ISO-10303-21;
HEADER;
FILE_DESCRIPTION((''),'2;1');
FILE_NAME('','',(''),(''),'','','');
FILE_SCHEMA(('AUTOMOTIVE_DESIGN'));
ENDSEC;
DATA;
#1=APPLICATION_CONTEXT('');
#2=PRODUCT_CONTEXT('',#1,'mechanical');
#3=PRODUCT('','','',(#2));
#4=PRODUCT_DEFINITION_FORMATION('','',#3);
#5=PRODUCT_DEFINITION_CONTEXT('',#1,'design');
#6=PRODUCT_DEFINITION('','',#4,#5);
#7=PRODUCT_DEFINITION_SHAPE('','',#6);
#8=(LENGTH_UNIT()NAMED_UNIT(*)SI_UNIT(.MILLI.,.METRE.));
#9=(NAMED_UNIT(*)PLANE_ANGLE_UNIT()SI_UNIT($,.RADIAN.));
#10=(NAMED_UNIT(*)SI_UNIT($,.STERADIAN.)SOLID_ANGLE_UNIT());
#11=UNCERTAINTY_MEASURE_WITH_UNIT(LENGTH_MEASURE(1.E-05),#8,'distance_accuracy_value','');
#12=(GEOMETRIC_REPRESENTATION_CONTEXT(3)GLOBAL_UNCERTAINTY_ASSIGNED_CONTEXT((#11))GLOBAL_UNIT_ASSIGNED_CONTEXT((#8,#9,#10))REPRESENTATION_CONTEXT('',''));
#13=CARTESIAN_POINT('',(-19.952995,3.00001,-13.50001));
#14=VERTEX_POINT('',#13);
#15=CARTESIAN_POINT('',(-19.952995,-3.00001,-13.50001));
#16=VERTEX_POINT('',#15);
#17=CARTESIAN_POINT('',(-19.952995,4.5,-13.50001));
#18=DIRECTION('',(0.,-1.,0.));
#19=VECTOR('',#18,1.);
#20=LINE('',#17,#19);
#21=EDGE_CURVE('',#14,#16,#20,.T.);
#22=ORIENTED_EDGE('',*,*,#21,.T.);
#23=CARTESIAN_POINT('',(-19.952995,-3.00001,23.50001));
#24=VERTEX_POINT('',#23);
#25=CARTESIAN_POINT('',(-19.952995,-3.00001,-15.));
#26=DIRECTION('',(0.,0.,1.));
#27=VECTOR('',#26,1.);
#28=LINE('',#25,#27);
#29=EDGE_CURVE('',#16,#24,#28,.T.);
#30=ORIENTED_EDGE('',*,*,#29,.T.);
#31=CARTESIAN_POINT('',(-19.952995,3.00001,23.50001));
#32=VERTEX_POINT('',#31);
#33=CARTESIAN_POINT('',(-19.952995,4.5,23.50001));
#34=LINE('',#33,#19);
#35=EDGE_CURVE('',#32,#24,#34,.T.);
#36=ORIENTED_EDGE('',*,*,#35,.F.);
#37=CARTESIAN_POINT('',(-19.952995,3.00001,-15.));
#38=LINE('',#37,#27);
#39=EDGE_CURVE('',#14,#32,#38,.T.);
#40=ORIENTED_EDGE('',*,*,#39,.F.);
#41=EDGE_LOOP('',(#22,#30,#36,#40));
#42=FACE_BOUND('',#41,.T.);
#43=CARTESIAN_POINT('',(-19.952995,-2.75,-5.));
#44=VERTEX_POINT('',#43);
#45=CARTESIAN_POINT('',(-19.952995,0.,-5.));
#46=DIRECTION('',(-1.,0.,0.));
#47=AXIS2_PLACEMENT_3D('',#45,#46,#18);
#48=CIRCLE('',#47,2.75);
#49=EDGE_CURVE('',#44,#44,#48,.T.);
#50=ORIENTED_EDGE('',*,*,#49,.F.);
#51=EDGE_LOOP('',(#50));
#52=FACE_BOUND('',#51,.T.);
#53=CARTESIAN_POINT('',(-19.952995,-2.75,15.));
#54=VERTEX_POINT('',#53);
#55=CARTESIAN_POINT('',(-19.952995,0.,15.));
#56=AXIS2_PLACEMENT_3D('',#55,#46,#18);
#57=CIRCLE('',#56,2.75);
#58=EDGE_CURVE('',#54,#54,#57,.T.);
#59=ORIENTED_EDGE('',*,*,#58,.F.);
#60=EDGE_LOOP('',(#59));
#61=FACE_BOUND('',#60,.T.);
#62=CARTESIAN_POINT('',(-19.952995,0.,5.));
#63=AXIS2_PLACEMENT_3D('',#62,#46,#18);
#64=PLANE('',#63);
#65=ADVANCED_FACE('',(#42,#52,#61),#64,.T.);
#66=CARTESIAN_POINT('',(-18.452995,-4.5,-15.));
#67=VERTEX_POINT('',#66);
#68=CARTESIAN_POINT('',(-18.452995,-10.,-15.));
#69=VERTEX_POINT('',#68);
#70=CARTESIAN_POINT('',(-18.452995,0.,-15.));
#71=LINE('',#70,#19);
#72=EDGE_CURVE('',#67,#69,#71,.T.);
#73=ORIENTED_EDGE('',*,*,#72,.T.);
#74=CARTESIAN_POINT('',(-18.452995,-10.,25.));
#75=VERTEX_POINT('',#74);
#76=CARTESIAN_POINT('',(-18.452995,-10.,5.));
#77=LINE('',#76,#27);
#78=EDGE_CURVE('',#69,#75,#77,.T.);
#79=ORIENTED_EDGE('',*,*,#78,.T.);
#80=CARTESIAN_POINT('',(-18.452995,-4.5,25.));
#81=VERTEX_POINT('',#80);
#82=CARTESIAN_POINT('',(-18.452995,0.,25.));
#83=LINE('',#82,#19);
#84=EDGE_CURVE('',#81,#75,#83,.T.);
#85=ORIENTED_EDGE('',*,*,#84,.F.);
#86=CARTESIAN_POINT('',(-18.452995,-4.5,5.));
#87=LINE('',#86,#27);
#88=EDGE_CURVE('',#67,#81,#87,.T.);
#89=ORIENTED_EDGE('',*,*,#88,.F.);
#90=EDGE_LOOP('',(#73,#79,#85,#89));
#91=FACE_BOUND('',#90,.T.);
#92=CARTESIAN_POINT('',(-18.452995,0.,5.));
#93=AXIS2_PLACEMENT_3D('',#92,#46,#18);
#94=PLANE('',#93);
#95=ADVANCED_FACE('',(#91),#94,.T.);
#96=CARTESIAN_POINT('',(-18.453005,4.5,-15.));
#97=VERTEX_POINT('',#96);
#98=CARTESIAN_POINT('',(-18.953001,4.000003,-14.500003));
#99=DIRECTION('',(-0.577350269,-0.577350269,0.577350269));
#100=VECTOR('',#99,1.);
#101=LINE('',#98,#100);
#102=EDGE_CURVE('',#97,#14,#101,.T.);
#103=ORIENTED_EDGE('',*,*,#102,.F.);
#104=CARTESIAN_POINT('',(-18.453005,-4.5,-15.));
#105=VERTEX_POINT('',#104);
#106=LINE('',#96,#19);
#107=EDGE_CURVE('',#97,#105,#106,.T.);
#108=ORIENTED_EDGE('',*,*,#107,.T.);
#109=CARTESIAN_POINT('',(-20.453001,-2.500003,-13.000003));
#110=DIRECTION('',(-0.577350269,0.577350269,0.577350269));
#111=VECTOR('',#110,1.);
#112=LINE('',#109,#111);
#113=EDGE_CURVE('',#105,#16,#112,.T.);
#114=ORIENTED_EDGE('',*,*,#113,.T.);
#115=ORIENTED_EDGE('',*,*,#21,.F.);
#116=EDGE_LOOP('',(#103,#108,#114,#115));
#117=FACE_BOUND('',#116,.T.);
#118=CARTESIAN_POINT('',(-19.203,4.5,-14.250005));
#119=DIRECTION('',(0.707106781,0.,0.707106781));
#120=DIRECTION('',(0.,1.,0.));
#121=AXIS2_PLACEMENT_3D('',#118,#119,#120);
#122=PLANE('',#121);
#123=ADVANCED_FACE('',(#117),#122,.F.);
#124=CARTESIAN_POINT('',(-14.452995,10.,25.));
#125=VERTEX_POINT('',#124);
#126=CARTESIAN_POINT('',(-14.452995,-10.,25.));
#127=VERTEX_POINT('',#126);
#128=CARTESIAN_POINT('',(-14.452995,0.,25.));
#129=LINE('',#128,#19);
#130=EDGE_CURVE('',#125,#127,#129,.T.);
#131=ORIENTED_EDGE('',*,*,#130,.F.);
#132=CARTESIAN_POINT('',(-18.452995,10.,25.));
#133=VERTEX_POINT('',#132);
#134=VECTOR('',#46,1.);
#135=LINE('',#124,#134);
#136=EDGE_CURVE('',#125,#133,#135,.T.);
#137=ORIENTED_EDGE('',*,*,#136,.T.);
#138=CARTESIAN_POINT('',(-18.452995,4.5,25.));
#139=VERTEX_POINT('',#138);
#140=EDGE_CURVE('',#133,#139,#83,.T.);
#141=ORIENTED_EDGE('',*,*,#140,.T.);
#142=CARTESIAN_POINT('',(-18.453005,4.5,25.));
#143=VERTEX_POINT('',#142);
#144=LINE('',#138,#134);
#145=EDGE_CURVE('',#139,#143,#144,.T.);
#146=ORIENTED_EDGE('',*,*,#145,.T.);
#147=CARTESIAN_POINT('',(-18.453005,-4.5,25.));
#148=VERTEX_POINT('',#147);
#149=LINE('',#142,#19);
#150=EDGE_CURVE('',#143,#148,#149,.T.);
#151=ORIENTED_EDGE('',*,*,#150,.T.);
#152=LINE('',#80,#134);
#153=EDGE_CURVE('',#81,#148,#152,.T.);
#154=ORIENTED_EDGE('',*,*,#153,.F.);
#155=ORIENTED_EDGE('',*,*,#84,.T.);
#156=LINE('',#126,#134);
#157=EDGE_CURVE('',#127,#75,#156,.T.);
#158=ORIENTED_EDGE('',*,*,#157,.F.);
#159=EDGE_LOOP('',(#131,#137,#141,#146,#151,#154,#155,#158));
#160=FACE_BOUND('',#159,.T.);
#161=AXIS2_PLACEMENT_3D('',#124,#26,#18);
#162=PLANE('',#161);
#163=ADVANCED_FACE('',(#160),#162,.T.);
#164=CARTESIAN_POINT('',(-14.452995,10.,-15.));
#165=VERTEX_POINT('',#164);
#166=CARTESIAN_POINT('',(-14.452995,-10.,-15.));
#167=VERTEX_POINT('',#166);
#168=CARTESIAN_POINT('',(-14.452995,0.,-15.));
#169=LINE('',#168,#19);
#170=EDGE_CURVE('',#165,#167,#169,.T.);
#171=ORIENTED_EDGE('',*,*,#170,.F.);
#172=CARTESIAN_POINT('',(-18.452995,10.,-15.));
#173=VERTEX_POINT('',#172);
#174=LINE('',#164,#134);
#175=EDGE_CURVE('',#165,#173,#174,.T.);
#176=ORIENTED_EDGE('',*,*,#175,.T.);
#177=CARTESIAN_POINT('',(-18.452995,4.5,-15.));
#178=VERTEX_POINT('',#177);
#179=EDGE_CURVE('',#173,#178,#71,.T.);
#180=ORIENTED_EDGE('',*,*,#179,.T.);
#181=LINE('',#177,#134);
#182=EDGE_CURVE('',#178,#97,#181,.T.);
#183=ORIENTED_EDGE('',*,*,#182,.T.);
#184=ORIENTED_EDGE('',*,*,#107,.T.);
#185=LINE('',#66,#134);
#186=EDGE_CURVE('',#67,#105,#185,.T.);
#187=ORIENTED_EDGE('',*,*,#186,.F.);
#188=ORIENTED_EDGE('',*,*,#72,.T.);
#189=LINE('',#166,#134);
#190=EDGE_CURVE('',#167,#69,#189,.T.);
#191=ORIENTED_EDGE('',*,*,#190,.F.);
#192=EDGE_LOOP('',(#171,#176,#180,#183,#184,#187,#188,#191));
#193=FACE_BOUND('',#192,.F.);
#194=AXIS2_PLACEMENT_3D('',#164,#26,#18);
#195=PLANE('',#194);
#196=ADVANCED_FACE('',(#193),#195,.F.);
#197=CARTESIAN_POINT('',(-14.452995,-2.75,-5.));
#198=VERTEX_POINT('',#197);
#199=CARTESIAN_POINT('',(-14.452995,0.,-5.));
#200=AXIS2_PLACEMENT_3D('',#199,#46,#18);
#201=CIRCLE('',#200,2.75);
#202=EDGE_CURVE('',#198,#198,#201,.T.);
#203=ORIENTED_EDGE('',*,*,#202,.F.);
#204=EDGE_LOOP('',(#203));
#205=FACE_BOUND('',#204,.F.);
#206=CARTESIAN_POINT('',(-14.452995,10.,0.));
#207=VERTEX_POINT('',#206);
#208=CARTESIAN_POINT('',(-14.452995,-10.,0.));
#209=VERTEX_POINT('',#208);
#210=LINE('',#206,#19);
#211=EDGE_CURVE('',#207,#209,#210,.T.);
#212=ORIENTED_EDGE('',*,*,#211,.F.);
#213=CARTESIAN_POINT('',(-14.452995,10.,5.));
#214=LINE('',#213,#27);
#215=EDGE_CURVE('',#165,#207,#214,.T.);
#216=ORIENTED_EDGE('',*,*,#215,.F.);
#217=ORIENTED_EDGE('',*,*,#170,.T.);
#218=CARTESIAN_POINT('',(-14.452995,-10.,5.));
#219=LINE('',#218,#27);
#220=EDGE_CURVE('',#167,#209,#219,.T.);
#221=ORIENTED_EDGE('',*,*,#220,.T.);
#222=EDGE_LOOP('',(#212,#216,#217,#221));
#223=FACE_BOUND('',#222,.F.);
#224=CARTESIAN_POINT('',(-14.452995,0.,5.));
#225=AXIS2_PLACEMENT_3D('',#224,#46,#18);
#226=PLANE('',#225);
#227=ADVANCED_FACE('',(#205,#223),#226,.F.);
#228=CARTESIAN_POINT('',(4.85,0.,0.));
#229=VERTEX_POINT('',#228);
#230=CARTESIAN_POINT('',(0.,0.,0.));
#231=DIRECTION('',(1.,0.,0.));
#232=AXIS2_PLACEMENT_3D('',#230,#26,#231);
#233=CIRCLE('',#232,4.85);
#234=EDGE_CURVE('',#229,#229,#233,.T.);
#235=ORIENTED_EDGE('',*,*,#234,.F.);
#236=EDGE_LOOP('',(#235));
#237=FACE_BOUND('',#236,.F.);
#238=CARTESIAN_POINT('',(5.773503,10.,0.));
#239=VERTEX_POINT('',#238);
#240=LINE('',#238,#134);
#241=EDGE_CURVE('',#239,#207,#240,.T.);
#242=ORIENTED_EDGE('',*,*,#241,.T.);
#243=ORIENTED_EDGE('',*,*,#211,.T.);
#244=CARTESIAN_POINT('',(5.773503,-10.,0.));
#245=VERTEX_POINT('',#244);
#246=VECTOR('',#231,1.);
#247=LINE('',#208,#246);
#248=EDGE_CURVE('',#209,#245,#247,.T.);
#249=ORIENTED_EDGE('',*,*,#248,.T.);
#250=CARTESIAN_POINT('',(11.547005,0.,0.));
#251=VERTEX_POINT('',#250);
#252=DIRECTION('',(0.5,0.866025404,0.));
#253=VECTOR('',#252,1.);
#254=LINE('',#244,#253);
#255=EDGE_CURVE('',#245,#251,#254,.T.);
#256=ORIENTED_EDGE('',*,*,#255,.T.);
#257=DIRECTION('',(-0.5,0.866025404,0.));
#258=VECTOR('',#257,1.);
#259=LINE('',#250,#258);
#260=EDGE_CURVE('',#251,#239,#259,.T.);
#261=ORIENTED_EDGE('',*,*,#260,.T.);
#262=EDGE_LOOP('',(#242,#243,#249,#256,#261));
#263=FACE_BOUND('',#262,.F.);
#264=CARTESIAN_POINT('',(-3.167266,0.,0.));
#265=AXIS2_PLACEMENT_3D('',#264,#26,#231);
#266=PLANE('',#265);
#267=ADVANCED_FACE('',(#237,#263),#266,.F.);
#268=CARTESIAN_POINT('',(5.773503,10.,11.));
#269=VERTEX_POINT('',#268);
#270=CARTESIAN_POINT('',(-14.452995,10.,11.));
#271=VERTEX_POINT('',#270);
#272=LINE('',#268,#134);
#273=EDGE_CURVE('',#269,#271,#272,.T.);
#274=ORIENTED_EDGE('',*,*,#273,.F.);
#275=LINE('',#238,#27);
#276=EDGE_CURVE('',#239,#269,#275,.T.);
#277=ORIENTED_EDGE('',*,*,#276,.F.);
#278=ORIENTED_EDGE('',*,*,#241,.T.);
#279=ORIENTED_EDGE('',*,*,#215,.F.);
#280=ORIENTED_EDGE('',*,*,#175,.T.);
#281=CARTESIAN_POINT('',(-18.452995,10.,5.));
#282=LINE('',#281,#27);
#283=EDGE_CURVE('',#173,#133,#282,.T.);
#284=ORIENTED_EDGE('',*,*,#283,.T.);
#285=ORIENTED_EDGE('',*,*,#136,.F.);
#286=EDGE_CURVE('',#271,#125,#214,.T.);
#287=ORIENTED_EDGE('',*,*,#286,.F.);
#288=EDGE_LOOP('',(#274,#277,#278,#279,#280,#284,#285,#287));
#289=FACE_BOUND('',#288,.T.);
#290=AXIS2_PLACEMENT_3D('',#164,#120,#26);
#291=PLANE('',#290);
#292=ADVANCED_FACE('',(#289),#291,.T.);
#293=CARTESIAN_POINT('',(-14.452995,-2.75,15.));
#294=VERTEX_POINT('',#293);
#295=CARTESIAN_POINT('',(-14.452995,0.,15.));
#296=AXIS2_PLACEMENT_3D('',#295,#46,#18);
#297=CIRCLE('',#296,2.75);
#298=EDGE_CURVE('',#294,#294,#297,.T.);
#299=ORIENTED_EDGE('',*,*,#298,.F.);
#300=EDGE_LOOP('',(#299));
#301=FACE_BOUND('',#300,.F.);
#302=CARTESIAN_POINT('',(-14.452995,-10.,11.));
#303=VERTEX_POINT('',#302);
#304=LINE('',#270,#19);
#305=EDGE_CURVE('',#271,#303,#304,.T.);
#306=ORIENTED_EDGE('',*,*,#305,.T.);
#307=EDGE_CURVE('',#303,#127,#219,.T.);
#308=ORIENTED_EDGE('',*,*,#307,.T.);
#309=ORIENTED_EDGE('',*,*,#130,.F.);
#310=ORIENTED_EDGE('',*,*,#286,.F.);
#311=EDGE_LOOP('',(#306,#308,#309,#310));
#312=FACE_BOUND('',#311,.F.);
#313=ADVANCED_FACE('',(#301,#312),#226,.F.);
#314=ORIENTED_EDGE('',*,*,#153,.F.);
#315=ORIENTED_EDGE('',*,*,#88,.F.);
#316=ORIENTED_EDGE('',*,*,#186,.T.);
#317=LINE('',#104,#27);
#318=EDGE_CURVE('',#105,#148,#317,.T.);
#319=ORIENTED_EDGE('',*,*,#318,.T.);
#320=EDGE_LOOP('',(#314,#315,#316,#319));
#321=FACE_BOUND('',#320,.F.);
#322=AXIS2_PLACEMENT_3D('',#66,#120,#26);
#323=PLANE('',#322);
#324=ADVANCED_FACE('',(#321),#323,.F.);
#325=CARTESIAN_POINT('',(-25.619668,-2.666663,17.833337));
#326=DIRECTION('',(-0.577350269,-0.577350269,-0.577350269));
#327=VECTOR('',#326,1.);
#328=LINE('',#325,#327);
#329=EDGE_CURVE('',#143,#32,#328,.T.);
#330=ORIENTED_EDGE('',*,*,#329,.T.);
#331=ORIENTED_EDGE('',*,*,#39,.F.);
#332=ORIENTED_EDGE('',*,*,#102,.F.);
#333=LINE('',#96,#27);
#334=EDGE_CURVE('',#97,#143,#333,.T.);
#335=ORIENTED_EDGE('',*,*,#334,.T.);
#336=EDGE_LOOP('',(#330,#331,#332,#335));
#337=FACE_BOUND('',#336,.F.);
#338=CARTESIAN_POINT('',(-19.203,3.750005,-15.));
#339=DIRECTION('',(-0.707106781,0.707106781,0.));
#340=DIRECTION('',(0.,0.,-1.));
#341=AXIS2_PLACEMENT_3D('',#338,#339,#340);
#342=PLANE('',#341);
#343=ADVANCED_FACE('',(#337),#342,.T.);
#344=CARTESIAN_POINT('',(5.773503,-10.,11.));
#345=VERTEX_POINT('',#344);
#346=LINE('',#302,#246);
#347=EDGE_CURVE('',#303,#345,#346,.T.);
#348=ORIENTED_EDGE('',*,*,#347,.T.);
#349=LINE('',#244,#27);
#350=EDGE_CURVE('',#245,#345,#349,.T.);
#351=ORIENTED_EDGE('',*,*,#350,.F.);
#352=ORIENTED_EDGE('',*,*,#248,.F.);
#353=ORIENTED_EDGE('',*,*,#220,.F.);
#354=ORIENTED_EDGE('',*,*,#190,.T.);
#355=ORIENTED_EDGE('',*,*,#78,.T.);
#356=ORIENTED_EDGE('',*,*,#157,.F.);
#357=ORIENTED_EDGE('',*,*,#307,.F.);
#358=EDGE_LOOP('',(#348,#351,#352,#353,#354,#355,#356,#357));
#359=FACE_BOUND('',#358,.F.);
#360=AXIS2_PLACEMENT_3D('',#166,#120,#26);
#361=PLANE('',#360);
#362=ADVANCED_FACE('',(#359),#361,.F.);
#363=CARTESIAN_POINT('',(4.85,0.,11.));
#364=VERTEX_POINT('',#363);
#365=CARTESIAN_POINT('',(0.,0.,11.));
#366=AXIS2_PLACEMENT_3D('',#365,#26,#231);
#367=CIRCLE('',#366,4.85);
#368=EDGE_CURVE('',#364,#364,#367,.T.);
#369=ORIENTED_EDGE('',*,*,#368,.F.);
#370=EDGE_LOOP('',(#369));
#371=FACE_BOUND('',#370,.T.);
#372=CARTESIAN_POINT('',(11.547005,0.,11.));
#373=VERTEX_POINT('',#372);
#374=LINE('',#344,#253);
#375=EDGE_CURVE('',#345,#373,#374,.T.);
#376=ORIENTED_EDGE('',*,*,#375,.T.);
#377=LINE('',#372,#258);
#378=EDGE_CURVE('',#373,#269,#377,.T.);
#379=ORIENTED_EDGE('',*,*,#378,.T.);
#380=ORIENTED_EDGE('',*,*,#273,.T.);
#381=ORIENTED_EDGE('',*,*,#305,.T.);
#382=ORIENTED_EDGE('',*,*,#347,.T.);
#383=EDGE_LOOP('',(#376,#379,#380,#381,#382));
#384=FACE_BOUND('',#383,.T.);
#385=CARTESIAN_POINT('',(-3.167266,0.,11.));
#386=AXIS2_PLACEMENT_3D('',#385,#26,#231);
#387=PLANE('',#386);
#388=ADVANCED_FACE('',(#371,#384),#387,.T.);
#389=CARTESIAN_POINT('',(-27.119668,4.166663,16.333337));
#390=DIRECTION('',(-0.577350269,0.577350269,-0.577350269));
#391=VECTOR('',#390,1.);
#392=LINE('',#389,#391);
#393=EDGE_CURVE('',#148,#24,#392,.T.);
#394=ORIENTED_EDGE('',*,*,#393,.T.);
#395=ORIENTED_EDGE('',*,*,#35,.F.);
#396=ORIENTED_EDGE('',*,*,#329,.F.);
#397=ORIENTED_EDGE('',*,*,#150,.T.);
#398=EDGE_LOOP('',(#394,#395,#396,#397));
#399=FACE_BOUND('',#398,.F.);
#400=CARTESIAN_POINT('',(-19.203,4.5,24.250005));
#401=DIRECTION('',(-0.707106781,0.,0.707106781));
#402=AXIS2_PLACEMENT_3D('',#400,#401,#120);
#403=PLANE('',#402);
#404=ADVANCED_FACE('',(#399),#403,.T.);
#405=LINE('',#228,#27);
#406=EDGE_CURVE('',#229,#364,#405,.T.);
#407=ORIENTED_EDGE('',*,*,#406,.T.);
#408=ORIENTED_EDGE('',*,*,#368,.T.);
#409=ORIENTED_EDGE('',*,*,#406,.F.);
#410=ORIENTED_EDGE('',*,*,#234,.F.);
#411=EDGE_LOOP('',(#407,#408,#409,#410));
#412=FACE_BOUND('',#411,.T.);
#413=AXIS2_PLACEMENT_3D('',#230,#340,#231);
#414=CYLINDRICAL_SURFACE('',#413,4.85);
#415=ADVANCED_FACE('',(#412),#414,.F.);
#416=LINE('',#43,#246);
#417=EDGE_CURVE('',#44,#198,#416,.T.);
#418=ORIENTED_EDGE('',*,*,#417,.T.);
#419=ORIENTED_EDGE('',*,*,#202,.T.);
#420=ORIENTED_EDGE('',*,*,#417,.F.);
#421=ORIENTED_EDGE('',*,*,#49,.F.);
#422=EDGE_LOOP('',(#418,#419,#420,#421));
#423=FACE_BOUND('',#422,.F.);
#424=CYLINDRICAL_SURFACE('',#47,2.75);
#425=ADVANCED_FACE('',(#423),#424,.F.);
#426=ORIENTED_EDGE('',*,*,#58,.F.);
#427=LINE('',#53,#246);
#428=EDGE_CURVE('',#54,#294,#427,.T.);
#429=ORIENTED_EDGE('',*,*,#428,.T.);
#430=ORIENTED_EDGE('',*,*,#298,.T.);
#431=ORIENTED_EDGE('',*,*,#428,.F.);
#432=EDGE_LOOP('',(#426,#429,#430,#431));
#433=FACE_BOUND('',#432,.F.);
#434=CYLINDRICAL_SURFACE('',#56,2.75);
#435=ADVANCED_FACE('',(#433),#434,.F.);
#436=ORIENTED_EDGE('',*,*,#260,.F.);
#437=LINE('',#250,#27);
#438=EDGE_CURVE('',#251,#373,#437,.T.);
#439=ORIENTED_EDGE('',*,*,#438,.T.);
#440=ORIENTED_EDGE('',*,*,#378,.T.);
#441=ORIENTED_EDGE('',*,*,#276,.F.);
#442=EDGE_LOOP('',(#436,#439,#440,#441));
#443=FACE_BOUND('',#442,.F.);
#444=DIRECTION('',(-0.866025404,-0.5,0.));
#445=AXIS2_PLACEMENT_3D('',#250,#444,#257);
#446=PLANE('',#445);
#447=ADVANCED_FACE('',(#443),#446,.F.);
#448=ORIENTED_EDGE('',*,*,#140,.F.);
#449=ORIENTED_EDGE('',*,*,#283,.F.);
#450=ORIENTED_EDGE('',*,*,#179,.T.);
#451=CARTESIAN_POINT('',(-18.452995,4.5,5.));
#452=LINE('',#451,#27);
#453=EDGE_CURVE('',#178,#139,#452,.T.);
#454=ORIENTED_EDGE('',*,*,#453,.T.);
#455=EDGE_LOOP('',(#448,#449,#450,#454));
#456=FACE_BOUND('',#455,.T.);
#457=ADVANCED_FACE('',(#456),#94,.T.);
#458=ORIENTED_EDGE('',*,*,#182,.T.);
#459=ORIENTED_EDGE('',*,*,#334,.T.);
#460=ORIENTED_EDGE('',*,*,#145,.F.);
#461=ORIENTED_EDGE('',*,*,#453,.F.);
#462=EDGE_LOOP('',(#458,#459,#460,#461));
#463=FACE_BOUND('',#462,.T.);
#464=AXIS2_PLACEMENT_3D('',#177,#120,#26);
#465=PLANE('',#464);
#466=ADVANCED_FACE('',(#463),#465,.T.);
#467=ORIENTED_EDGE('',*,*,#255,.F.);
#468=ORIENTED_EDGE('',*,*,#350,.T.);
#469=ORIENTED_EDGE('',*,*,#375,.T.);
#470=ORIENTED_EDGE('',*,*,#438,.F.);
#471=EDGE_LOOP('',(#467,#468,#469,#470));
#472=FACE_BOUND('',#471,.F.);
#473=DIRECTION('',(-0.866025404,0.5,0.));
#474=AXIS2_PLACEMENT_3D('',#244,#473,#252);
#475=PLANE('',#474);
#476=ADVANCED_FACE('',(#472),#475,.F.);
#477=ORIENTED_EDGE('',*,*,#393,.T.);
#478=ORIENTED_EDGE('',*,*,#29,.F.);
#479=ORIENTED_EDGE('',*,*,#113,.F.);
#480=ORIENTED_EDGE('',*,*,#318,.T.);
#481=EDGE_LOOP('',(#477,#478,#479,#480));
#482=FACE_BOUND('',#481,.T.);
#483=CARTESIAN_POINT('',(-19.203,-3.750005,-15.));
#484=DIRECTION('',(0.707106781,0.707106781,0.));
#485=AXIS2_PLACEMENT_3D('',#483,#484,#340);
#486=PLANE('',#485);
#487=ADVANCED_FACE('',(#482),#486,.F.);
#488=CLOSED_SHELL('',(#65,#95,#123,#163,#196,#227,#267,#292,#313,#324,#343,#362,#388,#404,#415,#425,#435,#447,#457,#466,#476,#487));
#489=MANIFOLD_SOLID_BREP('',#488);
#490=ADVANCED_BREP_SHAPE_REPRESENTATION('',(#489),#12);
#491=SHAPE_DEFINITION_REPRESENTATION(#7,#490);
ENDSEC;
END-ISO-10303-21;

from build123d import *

# Parameters (mm, degrees)
F0_R     = 4.85
F1_DEPTH = 11
F2_W     = 20
F2_H     = 40
F3_DEPTH = 4
F4_W     = 9
F4_H     = 40
F5_DEPTH = 1.5
F6_SIZE  = 1.49999
F7_R     = 2.75
F8_DEPTH = 31.501


# Not quite as in the source:
# - a fillet or chamfer is up to 0.001 mm smaller than in the source, because OpenCascade refuses the exact size


with BuildPart() as f1:
    # F0 (on Top) → F1 (new body)
    with BuildSketch(Plane.XY):
        Polygon((5.7735026919, 10), (-5.7735026919, 10), (-14.4529946162, 10), (-14.4529946162, -10), (-5.7735026919, -10), (5.7735026919, -10), (11.5470053838, 0), align=None)
        Circle(F0_R, mode=Mode.SUBTRACT)
    extrude(amount=F1_DEPTH)

    # F2 (on face) → F3 (join)
    with BuildSketch(Plane(origin=(-14.4529946162, 0, 0), x_dir=(0, -1, 0), z_dir=(-1, 0, 0))):
        with Locations((0, 5)):
            Rectangle(F2_W, F2_H)
    extrude(amount=F3_DEPTH)

    # F4 (on face) → F5 (join)
    with BuildSketch(Plane(origin=(-18.4529946162, 0, 0), x_dir=(0, -1, 0), z_dir=(-1, 0, 0))):
        with Locations((0, 5)):
            Rectangle(F4_W, F4_H)
    extrude(amount=F5_DEPTH)

    # F6 (size 1.5 in the source; OpenCascade refuses exactly that, so slightly less here)
    f6_edges = [f1.edges().sort_by_distance(p)[0] for p in [
        (-19.952995, 0, 25),
        (-19.952995, 4.5, 5),
        (-19.952995, 0, -15),
        (-19.952995, -4.5, 5),
    ]]
    chamfer(f6_edges, length=F6_SIZE)

    # F7 (on face) → F8 (cut, through all)
    with BuildSketch(Plane(origin=(-19.9529946162, 0, 0), x_dir=(0, -1, 0), z_dir=(-1, 0, 0))):
        with Locations((0, 15)):
            Circle(F7_R)
        with Locations((0, -5)):
            Circle(F7_R)
    extrude(amount=-F8_DEPTH, mode=Mode.SUBTRACT)


solid = f1.part
